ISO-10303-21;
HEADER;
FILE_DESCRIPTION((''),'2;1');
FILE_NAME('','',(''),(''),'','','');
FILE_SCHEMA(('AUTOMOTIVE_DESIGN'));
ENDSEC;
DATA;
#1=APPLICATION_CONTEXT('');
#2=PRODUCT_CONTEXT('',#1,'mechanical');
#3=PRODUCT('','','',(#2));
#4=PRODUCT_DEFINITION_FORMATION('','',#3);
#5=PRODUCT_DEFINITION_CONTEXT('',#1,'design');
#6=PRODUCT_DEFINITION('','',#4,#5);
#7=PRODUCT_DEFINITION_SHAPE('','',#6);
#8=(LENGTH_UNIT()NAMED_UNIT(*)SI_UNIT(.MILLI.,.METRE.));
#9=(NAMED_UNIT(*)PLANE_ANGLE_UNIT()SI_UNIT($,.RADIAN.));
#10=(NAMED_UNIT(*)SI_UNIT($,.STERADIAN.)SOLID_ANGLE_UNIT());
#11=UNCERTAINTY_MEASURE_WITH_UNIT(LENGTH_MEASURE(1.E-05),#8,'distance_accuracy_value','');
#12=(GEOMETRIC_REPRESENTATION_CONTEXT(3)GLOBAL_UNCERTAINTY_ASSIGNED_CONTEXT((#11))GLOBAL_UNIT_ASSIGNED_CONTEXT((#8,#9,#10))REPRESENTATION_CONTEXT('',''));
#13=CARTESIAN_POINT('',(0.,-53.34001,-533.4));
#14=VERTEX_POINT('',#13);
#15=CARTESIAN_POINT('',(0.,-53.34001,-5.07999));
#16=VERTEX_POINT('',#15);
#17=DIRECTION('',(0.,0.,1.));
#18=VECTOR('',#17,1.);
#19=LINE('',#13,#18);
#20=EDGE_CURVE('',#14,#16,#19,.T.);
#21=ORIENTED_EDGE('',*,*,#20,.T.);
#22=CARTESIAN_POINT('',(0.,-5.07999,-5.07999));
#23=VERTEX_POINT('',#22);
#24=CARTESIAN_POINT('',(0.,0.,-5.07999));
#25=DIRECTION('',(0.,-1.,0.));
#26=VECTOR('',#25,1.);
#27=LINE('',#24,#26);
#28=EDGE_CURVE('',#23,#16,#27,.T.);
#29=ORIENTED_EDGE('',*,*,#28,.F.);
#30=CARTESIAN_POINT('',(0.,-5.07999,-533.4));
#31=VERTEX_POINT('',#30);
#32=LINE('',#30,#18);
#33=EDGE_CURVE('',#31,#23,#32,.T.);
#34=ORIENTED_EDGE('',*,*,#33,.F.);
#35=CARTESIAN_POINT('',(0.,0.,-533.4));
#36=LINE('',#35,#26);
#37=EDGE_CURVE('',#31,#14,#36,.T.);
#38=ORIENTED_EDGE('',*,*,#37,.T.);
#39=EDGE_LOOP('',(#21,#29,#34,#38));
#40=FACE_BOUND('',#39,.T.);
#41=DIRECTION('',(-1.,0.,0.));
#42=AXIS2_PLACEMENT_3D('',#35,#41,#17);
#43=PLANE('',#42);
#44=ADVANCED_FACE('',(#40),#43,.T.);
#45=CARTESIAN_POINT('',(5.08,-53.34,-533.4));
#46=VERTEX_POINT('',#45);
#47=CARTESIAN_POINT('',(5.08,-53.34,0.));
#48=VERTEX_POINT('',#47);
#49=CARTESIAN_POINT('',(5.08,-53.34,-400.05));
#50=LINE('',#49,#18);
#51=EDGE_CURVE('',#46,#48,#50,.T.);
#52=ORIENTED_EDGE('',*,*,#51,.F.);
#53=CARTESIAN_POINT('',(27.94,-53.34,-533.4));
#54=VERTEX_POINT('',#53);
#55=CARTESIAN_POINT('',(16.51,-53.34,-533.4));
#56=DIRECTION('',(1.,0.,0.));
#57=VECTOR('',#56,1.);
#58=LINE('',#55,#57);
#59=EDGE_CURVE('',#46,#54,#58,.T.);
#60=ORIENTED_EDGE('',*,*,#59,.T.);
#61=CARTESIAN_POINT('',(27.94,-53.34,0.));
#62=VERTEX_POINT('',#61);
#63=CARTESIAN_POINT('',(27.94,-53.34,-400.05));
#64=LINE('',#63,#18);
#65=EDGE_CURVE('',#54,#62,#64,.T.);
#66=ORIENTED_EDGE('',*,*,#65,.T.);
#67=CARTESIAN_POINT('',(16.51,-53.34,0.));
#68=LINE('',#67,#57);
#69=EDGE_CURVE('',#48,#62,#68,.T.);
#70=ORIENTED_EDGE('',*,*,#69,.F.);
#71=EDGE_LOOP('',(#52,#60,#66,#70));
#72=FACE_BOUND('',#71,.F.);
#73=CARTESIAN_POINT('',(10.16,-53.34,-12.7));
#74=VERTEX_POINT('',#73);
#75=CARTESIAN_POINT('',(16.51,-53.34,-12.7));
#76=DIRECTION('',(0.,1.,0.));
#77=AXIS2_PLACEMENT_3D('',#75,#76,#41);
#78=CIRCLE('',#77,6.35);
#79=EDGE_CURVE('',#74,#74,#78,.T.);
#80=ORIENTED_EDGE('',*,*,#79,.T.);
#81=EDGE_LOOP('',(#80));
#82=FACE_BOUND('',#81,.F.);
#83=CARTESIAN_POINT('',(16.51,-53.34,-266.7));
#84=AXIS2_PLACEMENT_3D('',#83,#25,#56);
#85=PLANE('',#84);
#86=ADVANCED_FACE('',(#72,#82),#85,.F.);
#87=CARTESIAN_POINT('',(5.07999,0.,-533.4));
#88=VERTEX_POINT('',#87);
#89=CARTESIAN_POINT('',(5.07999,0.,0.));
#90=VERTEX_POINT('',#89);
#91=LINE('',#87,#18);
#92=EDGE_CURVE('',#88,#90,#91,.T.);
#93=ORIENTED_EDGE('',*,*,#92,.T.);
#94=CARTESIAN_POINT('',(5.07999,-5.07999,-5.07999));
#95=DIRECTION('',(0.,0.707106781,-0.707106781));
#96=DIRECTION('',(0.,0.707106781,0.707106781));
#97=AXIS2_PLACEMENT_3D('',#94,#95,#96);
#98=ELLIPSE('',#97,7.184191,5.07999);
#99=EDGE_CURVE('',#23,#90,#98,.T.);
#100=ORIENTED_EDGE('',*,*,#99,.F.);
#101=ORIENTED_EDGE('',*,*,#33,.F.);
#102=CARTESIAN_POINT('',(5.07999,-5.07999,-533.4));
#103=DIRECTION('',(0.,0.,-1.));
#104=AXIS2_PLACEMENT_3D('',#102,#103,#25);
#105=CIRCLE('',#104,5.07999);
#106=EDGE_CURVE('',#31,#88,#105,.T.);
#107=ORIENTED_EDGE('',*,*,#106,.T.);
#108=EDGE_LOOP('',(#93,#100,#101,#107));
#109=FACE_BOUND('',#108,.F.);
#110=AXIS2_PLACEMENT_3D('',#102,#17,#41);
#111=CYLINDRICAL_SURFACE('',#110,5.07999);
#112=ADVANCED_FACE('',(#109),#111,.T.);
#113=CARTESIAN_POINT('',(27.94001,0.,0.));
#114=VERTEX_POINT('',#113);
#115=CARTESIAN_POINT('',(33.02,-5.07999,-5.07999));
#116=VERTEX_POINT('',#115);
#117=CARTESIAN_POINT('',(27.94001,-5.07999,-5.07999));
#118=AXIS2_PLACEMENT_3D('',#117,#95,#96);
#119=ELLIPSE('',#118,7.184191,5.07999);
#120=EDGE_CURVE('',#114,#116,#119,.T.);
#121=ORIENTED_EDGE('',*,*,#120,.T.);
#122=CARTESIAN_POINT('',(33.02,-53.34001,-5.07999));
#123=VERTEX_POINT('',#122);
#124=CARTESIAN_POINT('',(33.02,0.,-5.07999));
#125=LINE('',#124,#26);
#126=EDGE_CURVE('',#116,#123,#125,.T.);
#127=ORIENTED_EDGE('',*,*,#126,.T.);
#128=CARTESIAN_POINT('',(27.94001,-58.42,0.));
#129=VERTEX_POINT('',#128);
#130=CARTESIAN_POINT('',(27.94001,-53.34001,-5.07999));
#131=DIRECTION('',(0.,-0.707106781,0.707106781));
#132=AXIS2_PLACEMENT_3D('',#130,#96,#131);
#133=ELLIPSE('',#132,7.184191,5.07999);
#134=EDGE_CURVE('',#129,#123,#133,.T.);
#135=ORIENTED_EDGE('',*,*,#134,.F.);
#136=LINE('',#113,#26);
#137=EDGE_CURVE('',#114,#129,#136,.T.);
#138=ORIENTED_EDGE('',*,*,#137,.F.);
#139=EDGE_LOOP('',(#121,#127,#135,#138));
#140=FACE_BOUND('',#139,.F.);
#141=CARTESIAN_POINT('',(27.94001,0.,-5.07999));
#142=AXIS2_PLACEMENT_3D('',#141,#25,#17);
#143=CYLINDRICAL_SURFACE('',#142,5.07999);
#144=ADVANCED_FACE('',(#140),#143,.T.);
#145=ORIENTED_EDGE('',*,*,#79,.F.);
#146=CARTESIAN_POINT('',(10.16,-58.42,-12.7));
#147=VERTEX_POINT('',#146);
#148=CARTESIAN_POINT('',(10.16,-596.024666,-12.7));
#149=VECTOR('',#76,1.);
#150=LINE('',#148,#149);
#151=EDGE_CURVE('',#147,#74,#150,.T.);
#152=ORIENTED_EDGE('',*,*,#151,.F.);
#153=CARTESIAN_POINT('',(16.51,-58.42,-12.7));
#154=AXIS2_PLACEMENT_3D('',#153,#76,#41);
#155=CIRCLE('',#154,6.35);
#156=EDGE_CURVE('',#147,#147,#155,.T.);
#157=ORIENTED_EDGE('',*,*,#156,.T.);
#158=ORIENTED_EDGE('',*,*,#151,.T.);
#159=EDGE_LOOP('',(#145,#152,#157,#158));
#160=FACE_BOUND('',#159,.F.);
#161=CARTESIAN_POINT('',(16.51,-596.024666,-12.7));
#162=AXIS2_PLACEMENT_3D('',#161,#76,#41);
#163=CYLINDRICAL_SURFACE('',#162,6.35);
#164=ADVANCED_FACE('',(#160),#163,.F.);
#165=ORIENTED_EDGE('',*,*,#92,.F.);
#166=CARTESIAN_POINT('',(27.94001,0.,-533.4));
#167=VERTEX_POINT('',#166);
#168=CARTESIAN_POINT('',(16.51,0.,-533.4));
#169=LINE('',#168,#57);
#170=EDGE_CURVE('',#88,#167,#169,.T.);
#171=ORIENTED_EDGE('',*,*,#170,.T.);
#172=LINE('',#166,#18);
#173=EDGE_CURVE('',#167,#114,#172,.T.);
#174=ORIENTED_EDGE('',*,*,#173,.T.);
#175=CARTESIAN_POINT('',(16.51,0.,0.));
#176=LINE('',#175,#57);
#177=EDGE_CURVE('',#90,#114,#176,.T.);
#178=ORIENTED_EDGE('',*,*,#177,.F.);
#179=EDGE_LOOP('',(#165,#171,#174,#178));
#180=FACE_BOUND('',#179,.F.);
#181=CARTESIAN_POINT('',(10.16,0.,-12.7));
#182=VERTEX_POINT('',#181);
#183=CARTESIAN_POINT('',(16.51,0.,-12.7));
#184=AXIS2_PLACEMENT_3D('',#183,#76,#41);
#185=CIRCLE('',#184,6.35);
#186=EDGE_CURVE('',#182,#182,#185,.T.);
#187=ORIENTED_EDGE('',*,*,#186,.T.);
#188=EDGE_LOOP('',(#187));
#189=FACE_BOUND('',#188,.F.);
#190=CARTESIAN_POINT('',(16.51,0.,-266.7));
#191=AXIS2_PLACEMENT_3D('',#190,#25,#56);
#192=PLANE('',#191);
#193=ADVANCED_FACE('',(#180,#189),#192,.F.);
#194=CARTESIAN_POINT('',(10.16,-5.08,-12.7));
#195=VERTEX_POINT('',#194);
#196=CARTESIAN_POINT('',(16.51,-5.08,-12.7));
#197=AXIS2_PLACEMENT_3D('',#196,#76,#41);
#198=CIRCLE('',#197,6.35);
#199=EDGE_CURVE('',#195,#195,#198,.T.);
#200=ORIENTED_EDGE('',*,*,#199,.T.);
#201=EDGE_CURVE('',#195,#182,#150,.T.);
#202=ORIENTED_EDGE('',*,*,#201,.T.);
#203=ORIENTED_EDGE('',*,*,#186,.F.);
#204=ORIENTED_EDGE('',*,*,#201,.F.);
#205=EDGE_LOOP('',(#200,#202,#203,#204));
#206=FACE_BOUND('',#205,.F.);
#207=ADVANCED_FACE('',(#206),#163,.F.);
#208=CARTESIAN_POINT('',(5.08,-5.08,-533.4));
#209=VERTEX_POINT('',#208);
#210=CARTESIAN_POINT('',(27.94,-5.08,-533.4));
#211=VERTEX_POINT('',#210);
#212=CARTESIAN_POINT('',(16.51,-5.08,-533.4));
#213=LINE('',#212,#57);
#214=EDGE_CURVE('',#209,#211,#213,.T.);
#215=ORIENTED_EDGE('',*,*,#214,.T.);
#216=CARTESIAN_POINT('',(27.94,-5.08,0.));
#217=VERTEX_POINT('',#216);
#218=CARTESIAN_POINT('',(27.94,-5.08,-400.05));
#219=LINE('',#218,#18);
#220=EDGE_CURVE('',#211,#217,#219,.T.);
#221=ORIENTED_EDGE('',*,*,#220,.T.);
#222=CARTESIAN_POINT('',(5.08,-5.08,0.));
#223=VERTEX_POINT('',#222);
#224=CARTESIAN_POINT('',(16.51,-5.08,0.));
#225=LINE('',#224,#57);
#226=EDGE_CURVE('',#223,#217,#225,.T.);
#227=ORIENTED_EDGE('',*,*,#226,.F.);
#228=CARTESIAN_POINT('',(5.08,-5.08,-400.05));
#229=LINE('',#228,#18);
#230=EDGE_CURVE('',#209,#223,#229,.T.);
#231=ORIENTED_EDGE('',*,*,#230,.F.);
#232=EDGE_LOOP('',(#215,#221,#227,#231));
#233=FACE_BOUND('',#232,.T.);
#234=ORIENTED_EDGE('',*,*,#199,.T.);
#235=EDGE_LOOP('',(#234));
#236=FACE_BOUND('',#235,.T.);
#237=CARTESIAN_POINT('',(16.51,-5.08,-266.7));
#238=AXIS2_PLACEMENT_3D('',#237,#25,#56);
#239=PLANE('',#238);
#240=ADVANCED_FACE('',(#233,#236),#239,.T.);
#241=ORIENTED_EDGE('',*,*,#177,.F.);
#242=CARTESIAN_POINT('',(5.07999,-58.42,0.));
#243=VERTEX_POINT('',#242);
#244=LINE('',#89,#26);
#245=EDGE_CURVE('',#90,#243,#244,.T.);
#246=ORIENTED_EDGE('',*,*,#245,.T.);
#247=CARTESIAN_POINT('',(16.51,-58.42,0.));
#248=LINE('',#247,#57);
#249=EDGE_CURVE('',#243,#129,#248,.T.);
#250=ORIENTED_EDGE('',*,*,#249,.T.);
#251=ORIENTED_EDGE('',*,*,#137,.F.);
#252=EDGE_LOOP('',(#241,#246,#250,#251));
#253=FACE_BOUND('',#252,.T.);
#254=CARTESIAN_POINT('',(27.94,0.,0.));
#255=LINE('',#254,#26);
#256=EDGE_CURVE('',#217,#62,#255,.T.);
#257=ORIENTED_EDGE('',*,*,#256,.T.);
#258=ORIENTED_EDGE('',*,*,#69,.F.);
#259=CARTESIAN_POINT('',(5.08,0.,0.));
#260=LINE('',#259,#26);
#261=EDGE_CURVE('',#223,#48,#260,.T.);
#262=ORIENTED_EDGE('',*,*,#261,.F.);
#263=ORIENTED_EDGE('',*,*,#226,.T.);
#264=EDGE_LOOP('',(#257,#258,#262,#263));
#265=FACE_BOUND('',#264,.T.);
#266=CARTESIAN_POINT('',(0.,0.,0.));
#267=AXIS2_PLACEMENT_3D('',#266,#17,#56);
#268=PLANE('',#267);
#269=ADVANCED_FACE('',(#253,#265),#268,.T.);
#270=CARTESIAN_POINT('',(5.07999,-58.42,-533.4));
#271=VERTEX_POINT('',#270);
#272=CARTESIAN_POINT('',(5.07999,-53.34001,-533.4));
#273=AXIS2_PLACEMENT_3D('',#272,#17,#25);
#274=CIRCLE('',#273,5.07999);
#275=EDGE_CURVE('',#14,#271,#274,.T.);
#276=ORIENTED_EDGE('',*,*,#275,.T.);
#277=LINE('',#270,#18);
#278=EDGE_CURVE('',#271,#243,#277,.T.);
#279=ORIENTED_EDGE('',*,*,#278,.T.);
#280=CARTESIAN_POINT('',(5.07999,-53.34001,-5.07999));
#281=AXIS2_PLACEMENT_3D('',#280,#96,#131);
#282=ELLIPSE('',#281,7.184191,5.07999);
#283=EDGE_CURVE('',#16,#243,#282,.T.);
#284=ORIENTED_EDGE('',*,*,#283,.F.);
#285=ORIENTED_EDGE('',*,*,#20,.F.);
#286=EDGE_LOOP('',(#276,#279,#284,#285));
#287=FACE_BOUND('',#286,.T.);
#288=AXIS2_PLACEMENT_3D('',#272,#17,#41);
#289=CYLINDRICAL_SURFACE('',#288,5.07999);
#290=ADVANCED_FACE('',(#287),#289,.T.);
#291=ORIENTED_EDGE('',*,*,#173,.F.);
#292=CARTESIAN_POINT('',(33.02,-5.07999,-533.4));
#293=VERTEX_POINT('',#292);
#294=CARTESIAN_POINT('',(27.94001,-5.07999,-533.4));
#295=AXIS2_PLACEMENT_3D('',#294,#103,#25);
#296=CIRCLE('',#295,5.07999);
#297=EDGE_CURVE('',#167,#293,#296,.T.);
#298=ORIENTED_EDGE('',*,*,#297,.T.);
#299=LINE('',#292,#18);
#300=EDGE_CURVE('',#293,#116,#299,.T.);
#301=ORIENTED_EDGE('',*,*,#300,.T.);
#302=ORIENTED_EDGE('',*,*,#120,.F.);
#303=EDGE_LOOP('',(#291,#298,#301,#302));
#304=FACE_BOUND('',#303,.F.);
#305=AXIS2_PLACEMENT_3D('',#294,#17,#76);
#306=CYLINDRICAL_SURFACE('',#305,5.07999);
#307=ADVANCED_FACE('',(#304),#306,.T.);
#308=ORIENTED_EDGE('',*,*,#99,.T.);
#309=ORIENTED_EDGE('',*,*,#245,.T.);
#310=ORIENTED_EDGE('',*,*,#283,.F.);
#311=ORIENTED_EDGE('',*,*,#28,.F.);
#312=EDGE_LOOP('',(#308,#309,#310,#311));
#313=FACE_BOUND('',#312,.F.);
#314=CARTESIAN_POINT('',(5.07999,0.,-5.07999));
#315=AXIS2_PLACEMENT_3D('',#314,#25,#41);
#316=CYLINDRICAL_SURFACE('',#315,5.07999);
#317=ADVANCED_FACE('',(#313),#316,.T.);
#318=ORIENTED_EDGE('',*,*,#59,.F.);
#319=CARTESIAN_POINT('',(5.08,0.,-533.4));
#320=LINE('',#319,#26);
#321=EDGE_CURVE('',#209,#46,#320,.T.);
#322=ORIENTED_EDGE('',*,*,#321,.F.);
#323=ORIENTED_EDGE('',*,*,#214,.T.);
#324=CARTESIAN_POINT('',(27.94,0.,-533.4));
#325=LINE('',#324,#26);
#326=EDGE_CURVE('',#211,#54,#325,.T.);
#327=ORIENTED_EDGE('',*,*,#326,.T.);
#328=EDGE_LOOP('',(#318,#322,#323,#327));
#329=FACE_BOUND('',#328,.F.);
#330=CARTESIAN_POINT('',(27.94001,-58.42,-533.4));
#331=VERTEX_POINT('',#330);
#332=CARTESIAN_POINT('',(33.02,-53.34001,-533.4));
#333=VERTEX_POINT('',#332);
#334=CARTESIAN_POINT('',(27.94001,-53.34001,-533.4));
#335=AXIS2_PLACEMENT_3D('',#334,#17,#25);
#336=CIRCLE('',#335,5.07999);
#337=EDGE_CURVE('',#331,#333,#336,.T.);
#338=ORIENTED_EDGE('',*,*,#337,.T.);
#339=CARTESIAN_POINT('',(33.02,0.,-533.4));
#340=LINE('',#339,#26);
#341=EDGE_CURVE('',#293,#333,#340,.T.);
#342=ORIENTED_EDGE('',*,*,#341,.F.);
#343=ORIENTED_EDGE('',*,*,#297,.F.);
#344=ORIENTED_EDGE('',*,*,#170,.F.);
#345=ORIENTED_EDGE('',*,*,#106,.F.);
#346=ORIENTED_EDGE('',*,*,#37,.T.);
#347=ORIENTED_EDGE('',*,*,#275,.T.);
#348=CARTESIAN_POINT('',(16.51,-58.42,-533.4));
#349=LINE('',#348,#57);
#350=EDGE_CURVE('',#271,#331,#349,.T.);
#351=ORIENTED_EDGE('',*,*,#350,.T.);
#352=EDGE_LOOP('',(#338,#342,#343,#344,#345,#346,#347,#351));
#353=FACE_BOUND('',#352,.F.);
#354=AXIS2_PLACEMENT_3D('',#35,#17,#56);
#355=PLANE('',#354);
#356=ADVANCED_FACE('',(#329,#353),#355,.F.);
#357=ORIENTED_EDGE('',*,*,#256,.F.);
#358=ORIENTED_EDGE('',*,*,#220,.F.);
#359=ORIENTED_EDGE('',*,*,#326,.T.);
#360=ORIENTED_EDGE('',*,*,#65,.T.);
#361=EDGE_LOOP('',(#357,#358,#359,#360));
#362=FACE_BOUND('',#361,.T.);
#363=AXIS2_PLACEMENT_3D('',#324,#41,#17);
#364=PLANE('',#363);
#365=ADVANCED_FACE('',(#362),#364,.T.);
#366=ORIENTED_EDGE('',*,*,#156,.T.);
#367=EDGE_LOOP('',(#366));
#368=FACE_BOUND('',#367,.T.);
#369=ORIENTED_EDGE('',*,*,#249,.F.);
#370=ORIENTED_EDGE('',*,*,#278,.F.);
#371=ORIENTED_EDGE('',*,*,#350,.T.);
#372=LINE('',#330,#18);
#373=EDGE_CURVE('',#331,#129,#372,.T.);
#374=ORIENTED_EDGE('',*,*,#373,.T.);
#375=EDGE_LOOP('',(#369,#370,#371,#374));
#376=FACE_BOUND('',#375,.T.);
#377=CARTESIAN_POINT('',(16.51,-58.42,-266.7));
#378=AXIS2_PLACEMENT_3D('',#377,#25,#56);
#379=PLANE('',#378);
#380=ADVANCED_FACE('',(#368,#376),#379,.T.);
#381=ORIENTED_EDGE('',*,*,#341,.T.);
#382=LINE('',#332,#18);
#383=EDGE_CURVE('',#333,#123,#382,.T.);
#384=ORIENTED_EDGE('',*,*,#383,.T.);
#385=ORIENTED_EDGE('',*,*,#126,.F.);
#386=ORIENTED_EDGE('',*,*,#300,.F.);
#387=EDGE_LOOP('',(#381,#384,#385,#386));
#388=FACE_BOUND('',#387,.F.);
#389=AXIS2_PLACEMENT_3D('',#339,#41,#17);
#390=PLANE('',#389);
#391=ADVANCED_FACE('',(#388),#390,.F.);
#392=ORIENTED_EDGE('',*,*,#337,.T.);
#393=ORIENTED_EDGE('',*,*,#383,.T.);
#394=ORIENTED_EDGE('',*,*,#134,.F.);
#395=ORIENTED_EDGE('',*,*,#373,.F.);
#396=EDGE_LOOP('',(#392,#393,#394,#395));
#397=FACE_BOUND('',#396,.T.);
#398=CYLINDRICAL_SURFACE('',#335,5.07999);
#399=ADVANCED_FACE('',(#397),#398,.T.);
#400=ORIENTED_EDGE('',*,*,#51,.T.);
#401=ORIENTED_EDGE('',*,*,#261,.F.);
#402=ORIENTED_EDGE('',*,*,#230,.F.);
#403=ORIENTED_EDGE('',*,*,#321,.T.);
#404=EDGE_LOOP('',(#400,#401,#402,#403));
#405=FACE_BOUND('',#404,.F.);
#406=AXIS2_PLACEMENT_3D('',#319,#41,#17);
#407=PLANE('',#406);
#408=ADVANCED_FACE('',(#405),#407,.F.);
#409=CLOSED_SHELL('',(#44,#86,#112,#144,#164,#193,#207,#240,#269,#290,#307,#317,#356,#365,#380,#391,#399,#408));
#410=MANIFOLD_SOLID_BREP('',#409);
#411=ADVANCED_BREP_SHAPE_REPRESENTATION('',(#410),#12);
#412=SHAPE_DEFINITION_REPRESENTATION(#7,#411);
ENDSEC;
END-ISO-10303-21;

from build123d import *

# Parameters (mm, degrees)
F0_W     = 33.02
F0_H     = 533.4
F1_DEPTH = 58.42
F3_T     = -5.08
F4_D     = 12.7
F5_R     = 5.07999


# Not quite as in the source:
# - a fillet or chamfer is up to 0.001 mm smaller than in the source, because OpenCascade refuses the exact size


with BuildPart() as f1:
    # F0 (on Front) → F1 (new body)
    with BuildSketch(Plane.XZ):
        with Locations((16.51, -266.7)):
            Rectangle(F0_W, F0_H)
    extrude(amount=F1_DEPTH)

    # F3
    f3_openings = [f1.faces().sort_by_distance(p)[0] for p in [
        (16.51, -29.21, 0),
        (16.51, -29.21, -533.4),
    ]]
    offset(amount=F3_T, openings=f3_openings)

    # F4 (through all)
    with Locations(Plane.XZ.offset(58.42)):
        with Locations((16.51, -12.7)):
            Hole(F4_D / 2)

    # F5 (radius 5.08 in the source; OpenCascade refuses exactly that, so slightly less here)
    f5_edges = [f1.edges().sort_by_distance(p)[0] for p in [
        (0, -58.42, -266.7),
        (33.02, -58.42, -266.7),
        (33.02, 0, -266.7),
        (0, 0, -266.7),
        (33.02, -29.21, 0),
        (0, -29.21, 0),
    ]]
    fillet(f5_edges, radius=F5_R)


solid = f1.part
